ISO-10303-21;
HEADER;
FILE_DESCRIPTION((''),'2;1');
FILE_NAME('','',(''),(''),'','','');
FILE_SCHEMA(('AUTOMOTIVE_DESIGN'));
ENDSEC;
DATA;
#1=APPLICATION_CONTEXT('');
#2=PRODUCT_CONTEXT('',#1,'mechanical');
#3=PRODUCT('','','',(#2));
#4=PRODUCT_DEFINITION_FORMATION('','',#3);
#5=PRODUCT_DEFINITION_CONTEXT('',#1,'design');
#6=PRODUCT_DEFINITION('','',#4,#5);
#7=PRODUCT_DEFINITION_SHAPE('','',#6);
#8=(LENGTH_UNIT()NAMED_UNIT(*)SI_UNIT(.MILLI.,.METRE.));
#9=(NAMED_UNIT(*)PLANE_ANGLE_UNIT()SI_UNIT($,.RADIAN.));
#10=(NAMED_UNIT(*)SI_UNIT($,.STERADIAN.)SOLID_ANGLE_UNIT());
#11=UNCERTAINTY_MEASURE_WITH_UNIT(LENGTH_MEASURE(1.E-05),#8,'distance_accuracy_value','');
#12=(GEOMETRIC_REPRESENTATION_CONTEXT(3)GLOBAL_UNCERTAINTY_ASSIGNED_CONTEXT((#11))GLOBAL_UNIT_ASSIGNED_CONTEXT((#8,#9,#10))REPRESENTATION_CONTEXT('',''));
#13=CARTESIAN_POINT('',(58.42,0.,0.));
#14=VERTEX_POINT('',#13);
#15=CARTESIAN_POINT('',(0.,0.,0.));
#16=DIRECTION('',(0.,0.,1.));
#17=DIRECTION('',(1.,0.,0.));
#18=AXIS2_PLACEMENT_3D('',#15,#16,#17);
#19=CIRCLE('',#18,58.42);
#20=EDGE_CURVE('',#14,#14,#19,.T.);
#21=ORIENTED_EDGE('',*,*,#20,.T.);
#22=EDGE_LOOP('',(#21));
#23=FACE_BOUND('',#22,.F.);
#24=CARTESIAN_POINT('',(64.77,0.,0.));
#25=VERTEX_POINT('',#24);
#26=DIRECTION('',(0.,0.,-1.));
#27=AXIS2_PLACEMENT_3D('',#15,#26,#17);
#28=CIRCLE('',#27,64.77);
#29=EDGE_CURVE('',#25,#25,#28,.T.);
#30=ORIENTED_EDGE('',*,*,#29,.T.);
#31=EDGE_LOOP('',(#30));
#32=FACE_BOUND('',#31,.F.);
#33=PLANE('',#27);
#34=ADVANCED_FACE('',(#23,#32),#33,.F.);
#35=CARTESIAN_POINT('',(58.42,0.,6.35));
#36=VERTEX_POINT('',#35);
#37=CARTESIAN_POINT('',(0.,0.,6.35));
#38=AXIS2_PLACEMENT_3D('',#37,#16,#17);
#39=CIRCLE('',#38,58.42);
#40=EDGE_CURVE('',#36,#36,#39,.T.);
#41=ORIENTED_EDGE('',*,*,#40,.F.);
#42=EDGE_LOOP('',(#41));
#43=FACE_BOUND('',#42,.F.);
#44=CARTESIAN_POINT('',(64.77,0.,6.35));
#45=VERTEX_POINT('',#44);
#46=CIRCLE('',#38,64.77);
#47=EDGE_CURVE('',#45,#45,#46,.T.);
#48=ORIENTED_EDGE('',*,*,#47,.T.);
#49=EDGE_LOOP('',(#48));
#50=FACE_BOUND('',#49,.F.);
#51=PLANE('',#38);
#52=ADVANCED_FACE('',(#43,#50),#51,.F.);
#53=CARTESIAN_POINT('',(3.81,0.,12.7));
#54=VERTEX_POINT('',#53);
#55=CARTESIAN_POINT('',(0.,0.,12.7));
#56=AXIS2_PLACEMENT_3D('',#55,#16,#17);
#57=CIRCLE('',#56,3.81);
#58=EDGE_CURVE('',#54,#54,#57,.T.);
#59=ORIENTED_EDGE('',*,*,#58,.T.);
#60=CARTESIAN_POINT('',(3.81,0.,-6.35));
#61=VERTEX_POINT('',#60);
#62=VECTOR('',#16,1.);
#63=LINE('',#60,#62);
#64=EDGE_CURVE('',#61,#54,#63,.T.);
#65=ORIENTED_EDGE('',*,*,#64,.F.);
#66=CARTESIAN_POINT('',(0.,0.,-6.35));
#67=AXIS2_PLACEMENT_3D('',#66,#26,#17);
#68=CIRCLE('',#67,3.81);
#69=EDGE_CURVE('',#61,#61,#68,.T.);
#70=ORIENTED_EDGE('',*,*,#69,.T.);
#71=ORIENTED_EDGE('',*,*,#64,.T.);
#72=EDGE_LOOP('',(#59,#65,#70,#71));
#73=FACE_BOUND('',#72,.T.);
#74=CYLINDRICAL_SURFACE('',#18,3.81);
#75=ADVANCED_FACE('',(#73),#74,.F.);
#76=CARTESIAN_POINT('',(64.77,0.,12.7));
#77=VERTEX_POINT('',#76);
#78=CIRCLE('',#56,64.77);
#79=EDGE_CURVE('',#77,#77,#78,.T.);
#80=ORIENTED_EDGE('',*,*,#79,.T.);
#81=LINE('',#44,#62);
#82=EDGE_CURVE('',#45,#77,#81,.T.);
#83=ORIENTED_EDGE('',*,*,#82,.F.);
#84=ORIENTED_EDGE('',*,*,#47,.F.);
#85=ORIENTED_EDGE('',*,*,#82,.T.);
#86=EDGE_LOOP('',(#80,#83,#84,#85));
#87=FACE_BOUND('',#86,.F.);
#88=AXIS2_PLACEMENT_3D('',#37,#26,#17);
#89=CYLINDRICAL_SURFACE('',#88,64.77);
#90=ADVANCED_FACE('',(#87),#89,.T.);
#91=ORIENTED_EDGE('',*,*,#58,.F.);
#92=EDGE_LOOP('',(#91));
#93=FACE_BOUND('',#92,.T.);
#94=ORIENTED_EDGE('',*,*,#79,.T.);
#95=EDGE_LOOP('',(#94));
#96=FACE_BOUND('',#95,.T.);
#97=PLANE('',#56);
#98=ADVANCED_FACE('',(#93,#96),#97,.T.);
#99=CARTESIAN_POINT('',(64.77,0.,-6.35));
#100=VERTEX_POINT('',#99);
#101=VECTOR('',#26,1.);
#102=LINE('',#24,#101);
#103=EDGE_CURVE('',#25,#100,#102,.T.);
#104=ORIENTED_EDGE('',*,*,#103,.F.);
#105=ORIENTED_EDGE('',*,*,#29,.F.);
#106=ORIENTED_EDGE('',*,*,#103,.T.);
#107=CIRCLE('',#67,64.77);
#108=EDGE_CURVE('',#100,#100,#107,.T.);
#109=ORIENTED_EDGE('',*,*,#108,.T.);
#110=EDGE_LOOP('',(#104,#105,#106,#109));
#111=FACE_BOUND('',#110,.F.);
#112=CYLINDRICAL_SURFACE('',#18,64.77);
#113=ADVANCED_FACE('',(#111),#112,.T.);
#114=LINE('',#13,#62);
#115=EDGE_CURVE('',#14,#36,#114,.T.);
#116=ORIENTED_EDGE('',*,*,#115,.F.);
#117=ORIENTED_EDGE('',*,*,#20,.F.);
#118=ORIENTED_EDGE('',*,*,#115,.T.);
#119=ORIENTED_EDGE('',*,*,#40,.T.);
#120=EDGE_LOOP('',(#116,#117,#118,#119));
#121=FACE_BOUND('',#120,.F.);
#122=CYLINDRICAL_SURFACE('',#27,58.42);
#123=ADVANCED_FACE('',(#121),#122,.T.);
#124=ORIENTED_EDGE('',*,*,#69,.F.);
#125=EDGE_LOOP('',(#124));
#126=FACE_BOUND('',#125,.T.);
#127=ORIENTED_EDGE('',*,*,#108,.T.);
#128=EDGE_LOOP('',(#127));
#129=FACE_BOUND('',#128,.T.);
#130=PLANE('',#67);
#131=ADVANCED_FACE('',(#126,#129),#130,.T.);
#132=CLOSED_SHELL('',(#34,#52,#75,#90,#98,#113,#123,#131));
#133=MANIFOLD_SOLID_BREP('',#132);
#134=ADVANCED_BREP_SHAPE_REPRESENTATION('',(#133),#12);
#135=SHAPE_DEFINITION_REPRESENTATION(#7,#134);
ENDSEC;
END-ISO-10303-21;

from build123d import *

# Parameters (mm, degrees)
F0_R     = 58.42
F1_DEPTH = 6.35
F2_R     = 3.81
F3_DEPTH = 25.4
F4_R     = 64.77
F4_R_2   = 58.42
F4_R_3   = 3.81
F5_DEPTH = 6.35
F6_R     = 64.77
F6_R_2   = 58.42
F6_R_3   = 3.81
F7_DEPTH = 6.35


with BuildPart() as f1:
    # F0 (on Top) → F1 (new body)
    with BuildSketch(Plane.XY):
        Circle(F0_R)
    extrude(amount=F1_DEPTH)

    # F2 (on face) → F3 (cut)
    with BuildSketch(Plane.XY.offset(6.35)):
        Circle(F2_R)
    extrude(amount=-F3_DEPTH, mode=Mode.SUBTRACT)

    # F4 (on face) → F5 (join)
    with BuildSketch(Plane.XY.offset(6.35)):
        Circle(F4_R)
        Circle(F4_R_2, mode=Mode.SUBTRACT)
        Circle(F4_R_2)
        Circle(F4_R_3, mode=Mode.SUBTRACT)
    extrude(amount=F5_DEPTH)

    # F6 (on face) → F7 (join)
    with BuildSketch(Plane(origin=(0, 0, 0), x_dir=(1, 0, 0), z_dir=(0, 0, -1))):
        Circle(F6_R)
        Circle(F6_R_2, mode=Mode.SUBTRACT)
        Circle(F6_R_2)
        Circle(F6_R_3, mode=Mode.SUBTRACT)
    extrude(amount=F7_DEPTH)


solid = f1.part
